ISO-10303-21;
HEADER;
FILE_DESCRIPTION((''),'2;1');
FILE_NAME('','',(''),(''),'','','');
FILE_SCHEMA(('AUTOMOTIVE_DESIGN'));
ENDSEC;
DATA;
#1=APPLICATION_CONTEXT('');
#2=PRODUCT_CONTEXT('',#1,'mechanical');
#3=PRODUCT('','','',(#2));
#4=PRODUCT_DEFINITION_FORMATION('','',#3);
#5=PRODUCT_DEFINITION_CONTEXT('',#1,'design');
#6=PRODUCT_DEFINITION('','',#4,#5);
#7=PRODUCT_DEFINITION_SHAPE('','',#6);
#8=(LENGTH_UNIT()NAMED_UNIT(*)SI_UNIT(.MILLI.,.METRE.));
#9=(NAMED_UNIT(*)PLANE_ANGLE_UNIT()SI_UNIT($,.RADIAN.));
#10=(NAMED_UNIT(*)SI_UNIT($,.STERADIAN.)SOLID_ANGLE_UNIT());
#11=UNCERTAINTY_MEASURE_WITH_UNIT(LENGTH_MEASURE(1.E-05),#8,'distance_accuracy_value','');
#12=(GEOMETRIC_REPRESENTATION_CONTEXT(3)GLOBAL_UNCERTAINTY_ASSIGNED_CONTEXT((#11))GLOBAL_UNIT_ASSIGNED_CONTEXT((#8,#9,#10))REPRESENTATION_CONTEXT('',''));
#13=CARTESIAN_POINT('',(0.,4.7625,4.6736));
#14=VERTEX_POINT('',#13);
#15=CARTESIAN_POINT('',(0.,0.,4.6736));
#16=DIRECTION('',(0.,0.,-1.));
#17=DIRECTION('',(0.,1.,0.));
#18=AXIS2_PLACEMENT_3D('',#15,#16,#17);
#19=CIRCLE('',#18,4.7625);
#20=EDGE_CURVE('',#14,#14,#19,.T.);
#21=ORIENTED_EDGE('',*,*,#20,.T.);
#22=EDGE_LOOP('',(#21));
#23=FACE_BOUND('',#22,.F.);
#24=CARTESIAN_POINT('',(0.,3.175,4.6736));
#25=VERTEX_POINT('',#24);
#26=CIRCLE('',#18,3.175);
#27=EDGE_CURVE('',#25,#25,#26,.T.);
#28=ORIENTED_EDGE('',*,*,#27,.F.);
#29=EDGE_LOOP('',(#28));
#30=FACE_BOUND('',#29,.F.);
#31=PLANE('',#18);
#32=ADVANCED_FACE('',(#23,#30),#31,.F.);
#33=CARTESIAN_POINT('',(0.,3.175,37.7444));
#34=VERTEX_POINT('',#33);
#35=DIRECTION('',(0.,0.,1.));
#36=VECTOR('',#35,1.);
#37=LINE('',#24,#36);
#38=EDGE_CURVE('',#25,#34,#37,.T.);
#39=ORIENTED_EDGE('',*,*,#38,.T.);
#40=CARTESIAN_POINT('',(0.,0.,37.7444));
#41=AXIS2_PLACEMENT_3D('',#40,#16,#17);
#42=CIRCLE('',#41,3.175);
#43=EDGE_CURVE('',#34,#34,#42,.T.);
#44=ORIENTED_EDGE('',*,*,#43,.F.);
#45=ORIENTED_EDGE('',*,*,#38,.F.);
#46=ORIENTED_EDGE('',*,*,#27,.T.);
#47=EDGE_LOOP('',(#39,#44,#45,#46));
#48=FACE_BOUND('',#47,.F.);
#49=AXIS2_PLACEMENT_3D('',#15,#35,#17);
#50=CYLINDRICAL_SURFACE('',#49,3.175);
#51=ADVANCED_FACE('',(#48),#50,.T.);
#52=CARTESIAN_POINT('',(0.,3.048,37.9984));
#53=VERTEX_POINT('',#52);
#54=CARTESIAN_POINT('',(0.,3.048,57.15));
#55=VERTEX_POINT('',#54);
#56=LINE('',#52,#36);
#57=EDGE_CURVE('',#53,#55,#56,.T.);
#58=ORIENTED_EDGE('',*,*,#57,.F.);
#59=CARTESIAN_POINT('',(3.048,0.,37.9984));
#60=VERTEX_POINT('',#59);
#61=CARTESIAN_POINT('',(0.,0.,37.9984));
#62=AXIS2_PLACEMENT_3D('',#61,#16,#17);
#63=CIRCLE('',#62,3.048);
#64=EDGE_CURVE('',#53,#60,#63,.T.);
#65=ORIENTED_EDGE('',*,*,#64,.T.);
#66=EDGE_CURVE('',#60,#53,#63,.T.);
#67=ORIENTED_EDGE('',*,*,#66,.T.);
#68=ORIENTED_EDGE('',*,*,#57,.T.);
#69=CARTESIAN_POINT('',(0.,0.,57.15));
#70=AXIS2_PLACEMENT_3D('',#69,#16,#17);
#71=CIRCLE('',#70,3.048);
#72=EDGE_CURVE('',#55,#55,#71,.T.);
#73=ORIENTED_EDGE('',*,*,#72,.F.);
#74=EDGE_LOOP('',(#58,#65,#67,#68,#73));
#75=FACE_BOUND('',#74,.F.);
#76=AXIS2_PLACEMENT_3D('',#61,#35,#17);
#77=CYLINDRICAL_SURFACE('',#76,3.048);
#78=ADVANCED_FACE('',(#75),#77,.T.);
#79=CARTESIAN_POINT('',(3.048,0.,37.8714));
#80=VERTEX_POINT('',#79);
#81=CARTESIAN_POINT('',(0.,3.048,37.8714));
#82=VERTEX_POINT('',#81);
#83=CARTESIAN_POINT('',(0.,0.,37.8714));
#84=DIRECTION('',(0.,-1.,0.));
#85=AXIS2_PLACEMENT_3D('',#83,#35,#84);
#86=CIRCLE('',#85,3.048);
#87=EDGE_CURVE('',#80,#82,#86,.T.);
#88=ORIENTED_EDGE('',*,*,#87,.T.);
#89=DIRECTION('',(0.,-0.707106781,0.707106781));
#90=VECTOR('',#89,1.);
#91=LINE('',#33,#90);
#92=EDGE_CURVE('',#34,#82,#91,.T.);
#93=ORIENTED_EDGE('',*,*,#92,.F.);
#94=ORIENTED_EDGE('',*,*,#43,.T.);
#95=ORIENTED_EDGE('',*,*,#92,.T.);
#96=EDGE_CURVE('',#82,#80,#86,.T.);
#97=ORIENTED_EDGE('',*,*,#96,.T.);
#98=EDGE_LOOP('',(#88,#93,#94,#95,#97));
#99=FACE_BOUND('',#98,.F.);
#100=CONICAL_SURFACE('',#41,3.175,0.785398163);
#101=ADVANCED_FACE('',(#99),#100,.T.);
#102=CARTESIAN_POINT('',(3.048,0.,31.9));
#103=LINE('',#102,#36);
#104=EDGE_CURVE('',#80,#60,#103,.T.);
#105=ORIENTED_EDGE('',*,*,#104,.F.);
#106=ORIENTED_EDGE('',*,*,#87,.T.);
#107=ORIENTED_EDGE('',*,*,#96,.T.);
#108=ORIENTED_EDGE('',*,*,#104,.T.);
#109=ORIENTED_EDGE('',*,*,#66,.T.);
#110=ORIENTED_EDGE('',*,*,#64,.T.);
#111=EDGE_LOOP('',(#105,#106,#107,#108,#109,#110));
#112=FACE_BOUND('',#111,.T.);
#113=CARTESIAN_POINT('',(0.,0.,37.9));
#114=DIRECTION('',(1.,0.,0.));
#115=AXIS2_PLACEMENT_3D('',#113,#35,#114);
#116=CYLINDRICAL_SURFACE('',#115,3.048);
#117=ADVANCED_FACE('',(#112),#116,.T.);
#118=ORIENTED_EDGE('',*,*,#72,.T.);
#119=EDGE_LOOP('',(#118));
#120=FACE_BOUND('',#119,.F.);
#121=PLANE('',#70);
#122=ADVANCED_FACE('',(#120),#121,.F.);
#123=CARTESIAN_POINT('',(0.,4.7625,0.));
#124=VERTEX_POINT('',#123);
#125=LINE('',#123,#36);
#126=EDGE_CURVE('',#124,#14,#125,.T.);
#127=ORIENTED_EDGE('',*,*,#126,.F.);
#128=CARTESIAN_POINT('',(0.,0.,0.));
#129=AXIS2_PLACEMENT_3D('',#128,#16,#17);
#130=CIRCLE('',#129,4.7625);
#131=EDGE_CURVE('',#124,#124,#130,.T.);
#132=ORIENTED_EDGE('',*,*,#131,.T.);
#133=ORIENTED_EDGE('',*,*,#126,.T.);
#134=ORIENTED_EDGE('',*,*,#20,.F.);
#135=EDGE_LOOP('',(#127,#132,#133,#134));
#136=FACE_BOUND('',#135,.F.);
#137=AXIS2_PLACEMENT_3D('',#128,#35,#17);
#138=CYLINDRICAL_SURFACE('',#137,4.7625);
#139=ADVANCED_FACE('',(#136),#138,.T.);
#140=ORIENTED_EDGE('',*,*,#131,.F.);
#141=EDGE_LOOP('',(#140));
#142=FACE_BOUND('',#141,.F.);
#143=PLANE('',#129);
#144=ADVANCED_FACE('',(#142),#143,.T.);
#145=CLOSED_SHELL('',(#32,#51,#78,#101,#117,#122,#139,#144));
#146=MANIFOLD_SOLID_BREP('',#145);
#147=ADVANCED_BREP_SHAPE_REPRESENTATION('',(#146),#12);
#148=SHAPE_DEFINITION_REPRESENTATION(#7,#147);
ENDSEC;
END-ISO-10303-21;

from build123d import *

# Parameters (mm, degrees)
F2_S5_R     = 3.048
F2_T6_DEPTH = 6


# Not quite as in the source:
# - a fillet or chamfer that OpenCascade refuses, or shapes differently, is made with other operations: its cross-section is extruded or revolved along the edge and cut away or added


with BuildPart() as f1:
    # F0 (on Right) → F1 (revolve)
    with BuildSketch(Plane.YZ):
        Polygon((0, 57.15), (0, 0), (4.7625, 0), (4.7625, 4.6736), (3.175, 4.6736), (3.175, 37.9984), (3.048, 37.9984), (3.048, 57.15), align=None)
    revolve(axis=Axis((0, 0, 28.575), (0, 0, -1)))

    # F2: chamfer of 0.254 on 1 edges, made by hand


with BuildPart() as f2_tool2:
    # F2_s3 → F2_t4 (revolve)
    with BuildSketch(Plane.YZ):
        Polygon((3.175, 37.7444), (2.921, 37.9984), (3.175, 37.9984), align=None)
    revolve(axis=Axis((0, 0, 37.9984), (0, 0, -1)))

    # F2_s5 → F2_t6 (cut, symmetric)
    with BuildSketch(Plane.XY.offset(37.9)):
        Circle(F2_S5_R)
    extrude(amount=F2_T6_DEPTH, both=True, mode=Mode.SUBTRACT)


with BuildPart() as f1_1:
    add(f1.part)

    # F2_t1: cut F2_tool2
    add(f2_tool2.part, mode=Mode.SUBTRACT)


solid = f1_1.part
